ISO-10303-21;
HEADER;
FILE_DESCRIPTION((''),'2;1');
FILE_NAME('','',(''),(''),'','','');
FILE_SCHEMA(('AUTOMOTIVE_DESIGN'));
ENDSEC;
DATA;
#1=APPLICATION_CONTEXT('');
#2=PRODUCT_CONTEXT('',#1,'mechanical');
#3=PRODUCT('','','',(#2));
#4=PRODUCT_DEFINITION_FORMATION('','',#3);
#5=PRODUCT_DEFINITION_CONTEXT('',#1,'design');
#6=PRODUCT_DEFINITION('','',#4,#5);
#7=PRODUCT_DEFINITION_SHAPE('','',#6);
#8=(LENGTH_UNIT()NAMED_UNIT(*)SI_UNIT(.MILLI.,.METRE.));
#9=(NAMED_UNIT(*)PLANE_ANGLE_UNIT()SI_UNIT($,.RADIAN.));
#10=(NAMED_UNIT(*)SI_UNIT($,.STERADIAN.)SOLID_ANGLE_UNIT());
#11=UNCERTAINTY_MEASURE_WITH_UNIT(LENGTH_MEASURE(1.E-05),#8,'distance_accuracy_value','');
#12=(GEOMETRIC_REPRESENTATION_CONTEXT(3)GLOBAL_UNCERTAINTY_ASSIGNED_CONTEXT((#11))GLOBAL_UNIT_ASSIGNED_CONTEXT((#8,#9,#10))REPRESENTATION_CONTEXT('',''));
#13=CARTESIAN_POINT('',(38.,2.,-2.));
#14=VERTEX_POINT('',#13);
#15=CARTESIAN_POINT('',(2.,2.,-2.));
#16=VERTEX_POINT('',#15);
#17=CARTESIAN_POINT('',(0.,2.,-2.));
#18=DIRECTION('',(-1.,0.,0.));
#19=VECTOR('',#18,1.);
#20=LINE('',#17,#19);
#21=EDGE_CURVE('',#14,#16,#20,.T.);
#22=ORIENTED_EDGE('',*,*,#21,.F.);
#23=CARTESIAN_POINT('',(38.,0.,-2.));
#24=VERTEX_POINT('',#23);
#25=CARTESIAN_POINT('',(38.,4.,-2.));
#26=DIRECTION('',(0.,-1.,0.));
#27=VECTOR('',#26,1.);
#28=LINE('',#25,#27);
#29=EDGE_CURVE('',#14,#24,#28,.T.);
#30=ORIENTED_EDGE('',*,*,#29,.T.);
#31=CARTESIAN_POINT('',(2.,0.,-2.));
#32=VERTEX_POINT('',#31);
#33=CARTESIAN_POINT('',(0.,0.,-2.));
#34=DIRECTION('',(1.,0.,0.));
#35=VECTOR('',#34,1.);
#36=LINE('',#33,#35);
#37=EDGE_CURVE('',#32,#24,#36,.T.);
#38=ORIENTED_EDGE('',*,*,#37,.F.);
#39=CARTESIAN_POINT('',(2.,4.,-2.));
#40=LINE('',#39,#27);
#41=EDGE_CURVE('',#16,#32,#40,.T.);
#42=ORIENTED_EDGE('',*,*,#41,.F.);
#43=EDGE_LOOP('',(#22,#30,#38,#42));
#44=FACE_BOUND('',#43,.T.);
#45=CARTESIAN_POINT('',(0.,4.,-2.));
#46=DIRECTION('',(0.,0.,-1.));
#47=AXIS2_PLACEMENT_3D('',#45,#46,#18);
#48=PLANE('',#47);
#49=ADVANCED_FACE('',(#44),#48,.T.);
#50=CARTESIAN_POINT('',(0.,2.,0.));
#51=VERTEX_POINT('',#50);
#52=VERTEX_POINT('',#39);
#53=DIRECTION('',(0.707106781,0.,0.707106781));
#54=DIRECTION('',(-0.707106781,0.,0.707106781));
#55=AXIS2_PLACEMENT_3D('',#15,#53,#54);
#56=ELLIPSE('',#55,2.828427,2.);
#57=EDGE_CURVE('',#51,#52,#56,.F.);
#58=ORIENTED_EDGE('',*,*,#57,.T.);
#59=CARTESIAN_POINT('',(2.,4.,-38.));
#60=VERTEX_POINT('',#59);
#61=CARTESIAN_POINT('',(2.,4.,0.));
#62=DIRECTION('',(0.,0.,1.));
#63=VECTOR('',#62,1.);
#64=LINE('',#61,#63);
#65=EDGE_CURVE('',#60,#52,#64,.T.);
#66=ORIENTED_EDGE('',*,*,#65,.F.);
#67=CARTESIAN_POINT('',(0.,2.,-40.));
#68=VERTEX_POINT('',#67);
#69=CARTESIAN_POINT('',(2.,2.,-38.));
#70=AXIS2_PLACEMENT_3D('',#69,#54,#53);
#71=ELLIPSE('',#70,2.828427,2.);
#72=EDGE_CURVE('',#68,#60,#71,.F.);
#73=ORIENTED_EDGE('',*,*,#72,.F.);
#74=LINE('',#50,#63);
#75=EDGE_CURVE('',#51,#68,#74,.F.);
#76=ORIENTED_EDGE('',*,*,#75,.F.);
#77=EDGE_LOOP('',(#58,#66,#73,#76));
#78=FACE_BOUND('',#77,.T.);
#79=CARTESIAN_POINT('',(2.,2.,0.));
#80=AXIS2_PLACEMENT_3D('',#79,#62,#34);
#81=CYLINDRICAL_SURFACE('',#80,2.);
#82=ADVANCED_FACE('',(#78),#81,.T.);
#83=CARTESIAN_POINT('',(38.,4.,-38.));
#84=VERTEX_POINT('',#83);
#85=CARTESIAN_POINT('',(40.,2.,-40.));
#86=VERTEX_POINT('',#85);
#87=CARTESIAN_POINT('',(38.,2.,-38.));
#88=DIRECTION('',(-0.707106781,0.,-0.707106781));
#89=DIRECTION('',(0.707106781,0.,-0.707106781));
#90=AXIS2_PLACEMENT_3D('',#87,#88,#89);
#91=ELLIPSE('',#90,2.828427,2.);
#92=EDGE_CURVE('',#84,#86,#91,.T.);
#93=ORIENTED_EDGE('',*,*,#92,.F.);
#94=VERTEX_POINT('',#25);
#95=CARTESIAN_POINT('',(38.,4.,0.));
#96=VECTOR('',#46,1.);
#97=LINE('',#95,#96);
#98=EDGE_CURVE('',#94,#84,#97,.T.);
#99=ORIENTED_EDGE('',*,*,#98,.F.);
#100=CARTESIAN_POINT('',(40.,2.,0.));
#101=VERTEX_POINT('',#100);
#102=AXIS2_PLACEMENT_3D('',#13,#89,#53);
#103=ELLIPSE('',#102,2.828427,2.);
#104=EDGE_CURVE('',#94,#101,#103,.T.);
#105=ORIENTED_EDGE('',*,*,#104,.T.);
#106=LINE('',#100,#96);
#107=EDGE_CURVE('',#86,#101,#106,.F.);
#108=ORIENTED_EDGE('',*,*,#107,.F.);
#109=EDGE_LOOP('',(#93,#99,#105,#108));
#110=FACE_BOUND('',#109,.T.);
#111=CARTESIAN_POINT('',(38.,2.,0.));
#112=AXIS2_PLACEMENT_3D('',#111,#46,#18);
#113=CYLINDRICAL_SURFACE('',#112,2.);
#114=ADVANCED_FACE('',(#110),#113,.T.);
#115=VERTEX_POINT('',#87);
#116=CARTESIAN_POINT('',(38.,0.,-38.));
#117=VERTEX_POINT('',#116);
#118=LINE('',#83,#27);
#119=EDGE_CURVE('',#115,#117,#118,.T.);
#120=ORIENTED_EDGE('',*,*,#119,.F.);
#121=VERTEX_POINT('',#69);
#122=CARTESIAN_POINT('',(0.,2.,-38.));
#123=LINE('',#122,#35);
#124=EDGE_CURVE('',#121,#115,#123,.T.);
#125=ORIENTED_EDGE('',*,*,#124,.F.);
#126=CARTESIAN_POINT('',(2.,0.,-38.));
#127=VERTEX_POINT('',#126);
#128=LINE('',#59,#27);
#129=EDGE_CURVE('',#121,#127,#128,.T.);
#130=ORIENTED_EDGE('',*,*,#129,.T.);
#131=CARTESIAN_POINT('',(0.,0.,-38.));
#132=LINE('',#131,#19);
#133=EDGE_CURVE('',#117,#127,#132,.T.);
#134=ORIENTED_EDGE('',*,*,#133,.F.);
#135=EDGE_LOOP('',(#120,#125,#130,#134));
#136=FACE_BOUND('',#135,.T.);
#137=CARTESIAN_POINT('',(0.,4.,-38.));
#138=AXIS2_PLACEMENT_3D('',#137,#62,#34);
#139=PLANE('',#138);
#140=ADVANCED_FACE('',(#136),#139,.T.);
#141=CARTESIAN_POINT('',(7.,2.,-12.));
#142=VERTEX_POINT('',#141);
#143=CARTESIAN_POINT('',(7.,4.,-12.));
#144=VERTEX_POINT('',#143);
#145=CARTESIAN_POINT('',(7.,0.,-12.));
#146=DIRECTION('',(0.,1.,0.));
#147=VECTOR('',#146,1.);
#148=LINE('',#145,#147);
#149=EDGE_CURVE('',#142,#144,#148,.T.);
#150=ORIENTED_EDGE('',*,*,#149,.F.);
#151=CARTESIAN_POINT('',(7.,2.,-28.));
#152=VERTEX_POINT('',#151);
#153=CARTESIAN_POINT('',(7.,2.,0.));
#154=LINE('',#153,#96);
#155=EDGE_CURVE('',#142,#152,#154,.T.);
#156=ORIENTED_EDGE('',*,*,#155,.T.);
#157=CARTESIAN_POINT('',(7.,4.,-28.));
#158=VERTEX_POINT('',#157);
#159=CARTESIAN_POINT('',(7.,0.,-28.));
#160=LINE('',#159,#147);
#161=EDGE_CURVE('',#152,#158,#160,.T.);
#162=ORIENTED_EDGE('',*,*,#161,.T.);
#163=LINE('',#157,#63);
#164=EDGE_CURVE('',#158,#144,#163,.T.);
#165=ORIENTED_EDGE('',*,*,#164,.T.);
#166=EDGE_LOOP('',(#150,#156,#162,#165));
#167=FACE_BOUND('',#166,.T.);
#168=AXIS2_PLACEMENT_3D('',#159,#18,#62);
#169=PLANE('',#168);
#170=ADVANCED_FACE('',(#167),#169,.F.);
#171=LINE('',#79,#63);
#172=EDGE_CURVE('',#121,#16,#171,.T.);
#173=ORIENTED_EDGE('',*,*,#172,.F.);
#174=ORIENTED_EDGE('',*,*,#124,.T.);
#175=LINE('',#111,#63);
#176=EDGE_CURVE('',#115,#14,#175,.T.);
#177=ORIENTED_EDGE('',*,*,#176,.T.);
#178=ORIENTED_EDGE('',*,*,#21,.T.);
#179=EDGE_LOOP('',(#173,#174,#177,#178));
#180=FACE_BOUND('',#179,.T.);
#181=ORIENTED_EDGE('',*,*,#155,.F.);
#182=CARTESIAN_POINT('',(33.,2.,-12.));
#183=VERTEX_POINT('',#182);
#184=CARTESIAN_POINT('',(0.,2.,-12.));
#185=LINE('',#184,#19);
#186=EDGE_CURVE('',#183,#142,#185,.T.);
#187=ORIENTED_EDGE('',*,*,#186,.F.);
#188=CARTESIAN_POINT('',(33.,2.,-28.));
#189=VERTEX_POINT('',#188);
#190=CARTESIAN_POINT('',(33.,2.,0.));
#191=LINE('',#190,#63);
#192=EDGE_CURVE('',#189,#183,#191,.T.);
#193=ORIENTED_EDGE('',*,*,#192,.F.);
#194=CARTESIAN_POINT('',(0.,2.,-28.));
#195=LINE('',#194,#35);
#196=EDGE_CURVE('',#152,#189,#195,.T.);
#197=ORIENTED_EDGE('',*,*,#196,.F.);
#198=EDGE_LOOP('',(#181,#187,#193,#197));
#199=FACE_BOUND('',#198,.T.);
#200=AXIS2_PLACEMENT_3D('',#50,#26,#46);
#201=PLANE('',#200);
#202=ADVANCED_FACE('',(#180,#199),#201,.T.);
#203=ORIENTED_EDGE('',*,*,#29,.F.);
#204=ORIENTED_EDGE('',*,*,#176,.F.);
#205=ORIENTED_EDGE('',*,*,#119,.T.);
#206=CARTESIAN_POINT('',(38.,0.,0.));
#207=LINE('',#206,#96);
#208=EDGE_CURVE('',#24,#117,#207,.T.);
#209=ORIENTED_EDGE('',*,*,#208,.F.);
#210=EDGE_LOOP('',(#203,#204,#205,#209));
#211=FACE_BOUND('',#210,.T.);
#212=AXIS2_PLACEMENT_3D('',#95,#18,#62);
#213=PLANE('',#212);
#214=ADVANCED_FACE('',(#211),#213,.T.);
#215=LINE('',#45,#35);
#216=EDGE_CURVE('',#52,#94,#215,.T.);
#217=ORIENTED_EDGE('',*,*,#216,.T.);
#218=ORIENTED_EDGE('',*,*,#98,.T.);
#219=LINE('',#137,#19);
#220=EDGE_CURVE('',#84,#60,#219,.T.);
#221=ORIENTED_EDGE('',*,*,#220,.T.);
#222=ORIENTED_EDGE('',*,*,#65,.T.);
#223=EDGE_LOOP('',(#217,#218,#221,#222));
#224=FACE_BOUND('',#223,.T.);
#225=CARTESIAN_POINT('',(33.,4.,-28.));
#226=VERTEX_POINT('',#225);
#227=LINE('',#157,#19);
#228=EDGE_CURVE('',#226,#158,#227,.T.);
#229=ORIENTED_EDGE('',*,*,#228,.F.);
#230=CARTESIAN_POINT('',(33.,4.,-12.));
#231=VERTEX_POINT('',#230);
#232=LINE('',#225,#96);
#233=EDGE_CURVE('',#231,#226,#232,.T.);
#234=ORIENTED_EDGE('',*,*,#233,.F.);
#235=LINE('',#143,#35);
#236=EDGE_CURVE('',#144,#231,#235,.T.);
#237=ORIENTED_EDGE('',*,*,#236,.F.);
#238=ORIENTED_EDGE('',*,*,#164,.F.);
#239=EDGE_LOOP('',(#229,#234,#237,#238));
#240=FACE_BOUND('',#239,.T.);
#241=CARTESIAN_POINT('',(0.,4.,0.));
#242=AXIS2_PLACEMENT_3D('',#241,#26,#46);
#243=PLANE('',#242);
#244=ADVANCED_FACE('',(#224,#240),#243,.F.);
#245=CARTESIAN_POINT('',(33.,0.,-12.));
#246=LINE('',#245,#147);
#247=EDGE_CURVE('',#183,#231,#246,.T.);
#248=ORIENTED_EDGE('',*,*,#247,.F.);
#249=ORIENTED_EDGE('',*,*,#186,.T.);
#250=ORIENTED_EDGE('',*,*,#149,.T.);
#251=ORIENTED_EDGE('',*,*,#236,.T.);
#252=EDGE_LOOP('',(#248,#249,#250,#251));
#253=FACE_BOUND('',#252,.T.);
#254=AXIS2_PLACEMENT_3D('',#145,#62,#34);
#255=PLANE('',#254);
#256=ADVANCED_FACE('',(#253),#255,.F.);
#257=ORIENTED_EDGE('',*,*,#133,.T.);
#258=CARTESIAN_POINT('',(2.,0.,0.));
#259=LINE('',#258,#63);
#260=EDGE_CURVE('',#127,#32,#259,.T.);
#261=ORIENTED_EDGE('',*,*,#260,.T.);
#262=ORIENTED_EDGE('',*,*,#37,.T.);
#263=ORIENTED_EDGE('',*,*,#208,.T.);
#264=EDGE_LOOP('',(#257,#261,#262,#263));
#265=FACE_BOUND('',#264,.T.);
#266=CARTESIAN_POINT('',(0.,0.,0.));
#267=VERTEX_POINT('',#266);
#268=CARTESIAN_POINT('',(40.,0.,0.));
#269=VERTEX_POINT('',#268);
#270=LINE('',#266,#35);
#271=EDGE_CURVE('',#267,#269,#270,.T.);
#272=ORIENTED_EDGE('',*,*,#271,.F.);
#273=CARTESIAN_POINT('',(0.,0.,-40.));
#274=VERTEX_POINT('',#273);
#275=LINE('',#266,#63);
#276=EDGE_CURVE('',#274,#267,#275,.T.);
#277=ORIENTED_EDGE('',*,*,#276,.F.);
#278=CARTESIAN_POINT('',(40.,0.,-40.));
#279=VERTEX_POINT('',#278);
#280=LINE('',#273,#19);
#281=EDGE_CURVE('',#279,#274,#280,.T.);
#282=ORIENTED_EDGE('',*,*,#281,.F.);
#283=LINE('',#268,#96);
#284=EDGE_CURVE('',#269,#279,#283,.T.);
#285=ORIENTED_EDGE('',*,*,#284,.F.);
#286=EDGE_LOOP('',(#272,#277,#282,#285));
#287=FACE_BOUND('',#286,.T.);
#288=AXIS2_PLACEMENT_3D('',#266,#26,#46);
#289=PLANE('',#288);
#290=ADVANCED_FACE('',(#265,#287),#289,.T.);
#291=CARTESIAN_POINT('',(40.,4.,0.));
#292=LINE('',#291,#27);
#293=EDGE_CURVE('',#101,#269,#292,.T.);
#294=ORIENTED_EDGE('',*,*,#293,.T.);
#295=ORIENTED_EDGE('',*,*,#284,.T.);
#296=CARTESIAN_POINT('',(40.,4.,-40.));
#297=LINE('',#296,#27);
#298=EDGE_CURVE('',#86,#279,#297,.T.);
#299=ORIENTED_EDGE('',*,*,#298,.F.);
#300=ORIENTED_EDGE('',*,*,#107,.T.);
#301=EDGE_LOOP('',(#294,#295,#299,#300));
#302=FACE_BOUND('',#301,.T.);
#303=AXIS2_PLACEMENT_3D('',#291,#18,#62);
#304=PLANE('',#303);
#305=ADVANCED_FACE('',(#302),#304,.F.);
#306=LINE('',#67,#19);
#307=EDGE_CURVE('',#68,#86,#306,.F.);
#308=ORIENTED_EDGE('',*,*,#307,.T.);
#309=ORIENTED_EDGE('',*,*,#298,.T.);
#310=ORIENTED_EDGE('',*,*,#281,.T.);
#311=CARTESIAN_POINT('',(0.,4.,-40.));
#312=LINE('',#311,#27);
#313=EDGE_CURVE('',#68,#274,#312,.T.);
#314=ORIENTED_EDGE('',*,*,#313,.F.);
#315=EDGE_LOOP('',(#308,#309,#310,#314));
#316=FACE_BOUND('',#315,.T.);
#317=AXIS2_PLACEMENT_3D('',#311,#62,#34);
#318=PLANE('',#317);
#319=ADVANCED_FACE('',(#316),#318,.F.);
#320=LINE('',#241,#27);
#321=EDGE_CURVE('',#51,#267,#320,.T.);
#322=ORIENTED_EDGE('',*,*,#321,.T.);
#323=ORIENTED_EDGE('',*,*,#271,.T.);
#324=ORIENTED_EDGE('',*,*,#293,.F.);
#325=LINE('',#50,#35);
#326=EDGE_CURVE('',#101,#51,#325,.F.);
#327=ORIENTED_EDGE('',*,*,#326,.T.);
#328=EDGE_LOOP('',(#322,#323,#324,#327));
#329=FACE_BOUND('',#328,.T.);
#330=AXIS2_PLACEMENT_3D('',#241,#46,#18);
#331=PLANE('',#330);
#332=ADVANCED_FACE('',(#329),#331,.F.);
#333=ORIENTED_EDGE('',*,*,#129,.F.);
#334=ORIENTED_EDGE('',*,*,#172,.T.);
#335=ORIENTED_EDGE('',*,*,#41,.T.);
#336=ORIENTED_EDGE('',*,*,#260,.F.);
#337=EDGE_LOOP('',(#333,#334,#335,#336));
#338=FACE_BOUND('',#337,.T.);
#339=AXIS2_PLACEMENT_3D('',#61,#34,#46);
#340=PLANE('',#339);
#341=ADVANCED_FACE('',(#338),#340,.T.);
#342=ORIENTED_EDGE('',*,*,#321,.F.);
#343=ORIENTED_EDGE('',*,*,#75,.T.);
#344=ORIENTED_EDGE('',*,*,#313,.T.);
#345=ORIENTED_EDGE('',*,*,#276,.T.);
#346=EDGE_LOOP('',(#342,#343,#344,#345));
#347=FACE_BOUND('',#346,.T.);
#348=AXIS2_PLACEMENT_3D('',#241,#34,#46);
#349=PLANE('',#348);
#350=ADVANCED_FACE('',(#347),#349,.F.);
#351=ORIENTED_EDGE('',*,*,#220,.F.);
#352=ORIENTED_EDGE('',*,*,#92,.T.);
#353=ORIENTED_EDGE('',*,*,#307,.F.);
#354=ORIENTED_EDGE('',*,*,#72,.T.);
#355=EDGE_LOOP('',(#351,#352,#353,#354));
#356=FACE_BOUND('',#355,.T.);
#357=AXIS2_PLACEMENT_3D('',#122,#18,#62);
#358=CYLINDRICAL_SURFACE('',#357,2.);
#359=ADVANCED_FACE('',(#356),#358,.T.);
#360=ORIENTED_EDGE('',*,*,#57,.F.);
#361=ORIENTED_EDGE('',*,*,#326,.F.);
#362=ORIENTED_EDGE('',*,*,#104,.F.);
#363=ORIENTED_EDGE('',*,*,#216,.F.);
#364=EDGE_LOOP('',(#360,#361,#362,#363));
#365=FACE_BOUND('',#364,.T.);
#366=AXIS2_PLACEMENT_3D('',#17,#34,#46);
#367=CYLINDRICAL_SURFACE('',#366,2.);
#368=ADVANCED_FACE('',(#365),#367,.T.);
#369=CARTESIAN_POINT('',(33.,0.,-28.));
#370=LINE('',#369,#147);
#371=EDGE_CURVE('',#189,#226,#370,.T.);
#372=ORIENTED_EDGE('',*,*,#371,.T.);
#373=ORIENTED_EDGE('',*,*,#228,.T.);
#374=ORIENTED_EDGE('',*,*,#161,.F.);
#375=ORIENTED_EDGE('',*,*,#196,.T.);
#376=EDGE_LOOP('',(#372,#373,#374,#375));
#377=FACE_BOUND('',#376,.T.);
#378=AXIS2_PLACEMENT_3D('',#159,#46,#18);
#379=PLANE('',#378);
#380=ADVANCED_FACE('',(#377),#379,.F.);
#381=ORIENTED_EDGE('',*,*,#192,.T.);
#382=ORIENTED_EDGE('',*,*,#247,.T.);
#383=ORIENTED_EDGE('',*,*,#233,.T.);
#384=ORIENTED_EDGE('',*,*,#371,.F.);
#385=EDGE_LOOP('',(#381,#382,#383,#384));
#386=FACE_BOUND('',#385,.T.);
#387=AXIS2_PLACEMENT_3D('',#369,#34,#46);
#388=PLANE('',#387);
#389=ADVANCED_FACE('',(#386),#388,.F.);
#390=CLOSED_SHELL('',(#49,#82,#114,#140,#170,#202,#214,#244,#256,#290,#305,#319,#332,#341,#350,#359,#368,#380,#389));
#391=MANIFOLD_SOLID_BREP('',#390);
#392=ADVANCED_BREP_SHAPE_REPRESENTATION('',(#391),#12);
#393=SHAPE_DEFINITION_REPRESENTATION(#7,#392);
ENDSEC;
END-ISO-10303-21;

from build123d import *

# Parameters (mm, degrees)
SKETCH1_W           = 40
SKETCH1_H           = 40
BOSS_EXTRUDE1_DEPTH = 4
FILLET2_R           = 2
SHELL1_START        = 2
SHELL1_OUTLINE_W    = 2
SHELL1_OUTLINE_H    = 36
SHELL1_DEPTH        = 36
SKETCH2_W           = 26
SKETCH2_H           = 16
CUT_EXTRUDE1_DEPTH  = 4


# Read off the part's stored shape, not the designer's step: Shell1
with BuildPart() as part:
    # Sketch1 → Boss-Extrude1 (new body)
    with BuildSketch(Plane(origin=(0, 0, 0), x_dir=(1, 0, 0), z_dir=(0, 1, 0))):
        with Locations((20, 20)):
            Rectangle(SKETCH1_W, SKETCH1_H)
    extrude(amount=BOSS_EXTRUDE1_DEPTH)

    # Fillet2
    fillet2_edges = [part.edges().sort_by_distance(p)[0] for p in [
        (40, 4, -20),
        (20, 4, -40),
        (0, 4, -20),
        (20, 4, 0),
    ]]
    fillet(fillet2_edges, radius=FILLET2_R)

    # Shell1 outline → Shell1 (cut)
    with BuildSketch(Plane.YZ.offset(SHELL1_START)):
        with Locations((1, -20)):
            Rectangle(SHELL1_OUTLINE_W, SHELL1_OUTLINE_H)
    extrude(amount=SHELL1_DEPTH, mode=Mode.SUBTRACT)

    # Sketch2 → Cut-Extrude1 (cut)
    with BuildSketch(Plane(origin=(0, 4, 0), x_dir=(1, 0, 0), z_dir=(0, 1, 0))):
        with Locations((20, 20)):
            Rectangle(SKETCH2_W, SKETCH2_H)
    extrude(amount=-CUT_EXTRUDE1_DEPTH, mode=Mode.SUBTRACT)


solid = part.part
